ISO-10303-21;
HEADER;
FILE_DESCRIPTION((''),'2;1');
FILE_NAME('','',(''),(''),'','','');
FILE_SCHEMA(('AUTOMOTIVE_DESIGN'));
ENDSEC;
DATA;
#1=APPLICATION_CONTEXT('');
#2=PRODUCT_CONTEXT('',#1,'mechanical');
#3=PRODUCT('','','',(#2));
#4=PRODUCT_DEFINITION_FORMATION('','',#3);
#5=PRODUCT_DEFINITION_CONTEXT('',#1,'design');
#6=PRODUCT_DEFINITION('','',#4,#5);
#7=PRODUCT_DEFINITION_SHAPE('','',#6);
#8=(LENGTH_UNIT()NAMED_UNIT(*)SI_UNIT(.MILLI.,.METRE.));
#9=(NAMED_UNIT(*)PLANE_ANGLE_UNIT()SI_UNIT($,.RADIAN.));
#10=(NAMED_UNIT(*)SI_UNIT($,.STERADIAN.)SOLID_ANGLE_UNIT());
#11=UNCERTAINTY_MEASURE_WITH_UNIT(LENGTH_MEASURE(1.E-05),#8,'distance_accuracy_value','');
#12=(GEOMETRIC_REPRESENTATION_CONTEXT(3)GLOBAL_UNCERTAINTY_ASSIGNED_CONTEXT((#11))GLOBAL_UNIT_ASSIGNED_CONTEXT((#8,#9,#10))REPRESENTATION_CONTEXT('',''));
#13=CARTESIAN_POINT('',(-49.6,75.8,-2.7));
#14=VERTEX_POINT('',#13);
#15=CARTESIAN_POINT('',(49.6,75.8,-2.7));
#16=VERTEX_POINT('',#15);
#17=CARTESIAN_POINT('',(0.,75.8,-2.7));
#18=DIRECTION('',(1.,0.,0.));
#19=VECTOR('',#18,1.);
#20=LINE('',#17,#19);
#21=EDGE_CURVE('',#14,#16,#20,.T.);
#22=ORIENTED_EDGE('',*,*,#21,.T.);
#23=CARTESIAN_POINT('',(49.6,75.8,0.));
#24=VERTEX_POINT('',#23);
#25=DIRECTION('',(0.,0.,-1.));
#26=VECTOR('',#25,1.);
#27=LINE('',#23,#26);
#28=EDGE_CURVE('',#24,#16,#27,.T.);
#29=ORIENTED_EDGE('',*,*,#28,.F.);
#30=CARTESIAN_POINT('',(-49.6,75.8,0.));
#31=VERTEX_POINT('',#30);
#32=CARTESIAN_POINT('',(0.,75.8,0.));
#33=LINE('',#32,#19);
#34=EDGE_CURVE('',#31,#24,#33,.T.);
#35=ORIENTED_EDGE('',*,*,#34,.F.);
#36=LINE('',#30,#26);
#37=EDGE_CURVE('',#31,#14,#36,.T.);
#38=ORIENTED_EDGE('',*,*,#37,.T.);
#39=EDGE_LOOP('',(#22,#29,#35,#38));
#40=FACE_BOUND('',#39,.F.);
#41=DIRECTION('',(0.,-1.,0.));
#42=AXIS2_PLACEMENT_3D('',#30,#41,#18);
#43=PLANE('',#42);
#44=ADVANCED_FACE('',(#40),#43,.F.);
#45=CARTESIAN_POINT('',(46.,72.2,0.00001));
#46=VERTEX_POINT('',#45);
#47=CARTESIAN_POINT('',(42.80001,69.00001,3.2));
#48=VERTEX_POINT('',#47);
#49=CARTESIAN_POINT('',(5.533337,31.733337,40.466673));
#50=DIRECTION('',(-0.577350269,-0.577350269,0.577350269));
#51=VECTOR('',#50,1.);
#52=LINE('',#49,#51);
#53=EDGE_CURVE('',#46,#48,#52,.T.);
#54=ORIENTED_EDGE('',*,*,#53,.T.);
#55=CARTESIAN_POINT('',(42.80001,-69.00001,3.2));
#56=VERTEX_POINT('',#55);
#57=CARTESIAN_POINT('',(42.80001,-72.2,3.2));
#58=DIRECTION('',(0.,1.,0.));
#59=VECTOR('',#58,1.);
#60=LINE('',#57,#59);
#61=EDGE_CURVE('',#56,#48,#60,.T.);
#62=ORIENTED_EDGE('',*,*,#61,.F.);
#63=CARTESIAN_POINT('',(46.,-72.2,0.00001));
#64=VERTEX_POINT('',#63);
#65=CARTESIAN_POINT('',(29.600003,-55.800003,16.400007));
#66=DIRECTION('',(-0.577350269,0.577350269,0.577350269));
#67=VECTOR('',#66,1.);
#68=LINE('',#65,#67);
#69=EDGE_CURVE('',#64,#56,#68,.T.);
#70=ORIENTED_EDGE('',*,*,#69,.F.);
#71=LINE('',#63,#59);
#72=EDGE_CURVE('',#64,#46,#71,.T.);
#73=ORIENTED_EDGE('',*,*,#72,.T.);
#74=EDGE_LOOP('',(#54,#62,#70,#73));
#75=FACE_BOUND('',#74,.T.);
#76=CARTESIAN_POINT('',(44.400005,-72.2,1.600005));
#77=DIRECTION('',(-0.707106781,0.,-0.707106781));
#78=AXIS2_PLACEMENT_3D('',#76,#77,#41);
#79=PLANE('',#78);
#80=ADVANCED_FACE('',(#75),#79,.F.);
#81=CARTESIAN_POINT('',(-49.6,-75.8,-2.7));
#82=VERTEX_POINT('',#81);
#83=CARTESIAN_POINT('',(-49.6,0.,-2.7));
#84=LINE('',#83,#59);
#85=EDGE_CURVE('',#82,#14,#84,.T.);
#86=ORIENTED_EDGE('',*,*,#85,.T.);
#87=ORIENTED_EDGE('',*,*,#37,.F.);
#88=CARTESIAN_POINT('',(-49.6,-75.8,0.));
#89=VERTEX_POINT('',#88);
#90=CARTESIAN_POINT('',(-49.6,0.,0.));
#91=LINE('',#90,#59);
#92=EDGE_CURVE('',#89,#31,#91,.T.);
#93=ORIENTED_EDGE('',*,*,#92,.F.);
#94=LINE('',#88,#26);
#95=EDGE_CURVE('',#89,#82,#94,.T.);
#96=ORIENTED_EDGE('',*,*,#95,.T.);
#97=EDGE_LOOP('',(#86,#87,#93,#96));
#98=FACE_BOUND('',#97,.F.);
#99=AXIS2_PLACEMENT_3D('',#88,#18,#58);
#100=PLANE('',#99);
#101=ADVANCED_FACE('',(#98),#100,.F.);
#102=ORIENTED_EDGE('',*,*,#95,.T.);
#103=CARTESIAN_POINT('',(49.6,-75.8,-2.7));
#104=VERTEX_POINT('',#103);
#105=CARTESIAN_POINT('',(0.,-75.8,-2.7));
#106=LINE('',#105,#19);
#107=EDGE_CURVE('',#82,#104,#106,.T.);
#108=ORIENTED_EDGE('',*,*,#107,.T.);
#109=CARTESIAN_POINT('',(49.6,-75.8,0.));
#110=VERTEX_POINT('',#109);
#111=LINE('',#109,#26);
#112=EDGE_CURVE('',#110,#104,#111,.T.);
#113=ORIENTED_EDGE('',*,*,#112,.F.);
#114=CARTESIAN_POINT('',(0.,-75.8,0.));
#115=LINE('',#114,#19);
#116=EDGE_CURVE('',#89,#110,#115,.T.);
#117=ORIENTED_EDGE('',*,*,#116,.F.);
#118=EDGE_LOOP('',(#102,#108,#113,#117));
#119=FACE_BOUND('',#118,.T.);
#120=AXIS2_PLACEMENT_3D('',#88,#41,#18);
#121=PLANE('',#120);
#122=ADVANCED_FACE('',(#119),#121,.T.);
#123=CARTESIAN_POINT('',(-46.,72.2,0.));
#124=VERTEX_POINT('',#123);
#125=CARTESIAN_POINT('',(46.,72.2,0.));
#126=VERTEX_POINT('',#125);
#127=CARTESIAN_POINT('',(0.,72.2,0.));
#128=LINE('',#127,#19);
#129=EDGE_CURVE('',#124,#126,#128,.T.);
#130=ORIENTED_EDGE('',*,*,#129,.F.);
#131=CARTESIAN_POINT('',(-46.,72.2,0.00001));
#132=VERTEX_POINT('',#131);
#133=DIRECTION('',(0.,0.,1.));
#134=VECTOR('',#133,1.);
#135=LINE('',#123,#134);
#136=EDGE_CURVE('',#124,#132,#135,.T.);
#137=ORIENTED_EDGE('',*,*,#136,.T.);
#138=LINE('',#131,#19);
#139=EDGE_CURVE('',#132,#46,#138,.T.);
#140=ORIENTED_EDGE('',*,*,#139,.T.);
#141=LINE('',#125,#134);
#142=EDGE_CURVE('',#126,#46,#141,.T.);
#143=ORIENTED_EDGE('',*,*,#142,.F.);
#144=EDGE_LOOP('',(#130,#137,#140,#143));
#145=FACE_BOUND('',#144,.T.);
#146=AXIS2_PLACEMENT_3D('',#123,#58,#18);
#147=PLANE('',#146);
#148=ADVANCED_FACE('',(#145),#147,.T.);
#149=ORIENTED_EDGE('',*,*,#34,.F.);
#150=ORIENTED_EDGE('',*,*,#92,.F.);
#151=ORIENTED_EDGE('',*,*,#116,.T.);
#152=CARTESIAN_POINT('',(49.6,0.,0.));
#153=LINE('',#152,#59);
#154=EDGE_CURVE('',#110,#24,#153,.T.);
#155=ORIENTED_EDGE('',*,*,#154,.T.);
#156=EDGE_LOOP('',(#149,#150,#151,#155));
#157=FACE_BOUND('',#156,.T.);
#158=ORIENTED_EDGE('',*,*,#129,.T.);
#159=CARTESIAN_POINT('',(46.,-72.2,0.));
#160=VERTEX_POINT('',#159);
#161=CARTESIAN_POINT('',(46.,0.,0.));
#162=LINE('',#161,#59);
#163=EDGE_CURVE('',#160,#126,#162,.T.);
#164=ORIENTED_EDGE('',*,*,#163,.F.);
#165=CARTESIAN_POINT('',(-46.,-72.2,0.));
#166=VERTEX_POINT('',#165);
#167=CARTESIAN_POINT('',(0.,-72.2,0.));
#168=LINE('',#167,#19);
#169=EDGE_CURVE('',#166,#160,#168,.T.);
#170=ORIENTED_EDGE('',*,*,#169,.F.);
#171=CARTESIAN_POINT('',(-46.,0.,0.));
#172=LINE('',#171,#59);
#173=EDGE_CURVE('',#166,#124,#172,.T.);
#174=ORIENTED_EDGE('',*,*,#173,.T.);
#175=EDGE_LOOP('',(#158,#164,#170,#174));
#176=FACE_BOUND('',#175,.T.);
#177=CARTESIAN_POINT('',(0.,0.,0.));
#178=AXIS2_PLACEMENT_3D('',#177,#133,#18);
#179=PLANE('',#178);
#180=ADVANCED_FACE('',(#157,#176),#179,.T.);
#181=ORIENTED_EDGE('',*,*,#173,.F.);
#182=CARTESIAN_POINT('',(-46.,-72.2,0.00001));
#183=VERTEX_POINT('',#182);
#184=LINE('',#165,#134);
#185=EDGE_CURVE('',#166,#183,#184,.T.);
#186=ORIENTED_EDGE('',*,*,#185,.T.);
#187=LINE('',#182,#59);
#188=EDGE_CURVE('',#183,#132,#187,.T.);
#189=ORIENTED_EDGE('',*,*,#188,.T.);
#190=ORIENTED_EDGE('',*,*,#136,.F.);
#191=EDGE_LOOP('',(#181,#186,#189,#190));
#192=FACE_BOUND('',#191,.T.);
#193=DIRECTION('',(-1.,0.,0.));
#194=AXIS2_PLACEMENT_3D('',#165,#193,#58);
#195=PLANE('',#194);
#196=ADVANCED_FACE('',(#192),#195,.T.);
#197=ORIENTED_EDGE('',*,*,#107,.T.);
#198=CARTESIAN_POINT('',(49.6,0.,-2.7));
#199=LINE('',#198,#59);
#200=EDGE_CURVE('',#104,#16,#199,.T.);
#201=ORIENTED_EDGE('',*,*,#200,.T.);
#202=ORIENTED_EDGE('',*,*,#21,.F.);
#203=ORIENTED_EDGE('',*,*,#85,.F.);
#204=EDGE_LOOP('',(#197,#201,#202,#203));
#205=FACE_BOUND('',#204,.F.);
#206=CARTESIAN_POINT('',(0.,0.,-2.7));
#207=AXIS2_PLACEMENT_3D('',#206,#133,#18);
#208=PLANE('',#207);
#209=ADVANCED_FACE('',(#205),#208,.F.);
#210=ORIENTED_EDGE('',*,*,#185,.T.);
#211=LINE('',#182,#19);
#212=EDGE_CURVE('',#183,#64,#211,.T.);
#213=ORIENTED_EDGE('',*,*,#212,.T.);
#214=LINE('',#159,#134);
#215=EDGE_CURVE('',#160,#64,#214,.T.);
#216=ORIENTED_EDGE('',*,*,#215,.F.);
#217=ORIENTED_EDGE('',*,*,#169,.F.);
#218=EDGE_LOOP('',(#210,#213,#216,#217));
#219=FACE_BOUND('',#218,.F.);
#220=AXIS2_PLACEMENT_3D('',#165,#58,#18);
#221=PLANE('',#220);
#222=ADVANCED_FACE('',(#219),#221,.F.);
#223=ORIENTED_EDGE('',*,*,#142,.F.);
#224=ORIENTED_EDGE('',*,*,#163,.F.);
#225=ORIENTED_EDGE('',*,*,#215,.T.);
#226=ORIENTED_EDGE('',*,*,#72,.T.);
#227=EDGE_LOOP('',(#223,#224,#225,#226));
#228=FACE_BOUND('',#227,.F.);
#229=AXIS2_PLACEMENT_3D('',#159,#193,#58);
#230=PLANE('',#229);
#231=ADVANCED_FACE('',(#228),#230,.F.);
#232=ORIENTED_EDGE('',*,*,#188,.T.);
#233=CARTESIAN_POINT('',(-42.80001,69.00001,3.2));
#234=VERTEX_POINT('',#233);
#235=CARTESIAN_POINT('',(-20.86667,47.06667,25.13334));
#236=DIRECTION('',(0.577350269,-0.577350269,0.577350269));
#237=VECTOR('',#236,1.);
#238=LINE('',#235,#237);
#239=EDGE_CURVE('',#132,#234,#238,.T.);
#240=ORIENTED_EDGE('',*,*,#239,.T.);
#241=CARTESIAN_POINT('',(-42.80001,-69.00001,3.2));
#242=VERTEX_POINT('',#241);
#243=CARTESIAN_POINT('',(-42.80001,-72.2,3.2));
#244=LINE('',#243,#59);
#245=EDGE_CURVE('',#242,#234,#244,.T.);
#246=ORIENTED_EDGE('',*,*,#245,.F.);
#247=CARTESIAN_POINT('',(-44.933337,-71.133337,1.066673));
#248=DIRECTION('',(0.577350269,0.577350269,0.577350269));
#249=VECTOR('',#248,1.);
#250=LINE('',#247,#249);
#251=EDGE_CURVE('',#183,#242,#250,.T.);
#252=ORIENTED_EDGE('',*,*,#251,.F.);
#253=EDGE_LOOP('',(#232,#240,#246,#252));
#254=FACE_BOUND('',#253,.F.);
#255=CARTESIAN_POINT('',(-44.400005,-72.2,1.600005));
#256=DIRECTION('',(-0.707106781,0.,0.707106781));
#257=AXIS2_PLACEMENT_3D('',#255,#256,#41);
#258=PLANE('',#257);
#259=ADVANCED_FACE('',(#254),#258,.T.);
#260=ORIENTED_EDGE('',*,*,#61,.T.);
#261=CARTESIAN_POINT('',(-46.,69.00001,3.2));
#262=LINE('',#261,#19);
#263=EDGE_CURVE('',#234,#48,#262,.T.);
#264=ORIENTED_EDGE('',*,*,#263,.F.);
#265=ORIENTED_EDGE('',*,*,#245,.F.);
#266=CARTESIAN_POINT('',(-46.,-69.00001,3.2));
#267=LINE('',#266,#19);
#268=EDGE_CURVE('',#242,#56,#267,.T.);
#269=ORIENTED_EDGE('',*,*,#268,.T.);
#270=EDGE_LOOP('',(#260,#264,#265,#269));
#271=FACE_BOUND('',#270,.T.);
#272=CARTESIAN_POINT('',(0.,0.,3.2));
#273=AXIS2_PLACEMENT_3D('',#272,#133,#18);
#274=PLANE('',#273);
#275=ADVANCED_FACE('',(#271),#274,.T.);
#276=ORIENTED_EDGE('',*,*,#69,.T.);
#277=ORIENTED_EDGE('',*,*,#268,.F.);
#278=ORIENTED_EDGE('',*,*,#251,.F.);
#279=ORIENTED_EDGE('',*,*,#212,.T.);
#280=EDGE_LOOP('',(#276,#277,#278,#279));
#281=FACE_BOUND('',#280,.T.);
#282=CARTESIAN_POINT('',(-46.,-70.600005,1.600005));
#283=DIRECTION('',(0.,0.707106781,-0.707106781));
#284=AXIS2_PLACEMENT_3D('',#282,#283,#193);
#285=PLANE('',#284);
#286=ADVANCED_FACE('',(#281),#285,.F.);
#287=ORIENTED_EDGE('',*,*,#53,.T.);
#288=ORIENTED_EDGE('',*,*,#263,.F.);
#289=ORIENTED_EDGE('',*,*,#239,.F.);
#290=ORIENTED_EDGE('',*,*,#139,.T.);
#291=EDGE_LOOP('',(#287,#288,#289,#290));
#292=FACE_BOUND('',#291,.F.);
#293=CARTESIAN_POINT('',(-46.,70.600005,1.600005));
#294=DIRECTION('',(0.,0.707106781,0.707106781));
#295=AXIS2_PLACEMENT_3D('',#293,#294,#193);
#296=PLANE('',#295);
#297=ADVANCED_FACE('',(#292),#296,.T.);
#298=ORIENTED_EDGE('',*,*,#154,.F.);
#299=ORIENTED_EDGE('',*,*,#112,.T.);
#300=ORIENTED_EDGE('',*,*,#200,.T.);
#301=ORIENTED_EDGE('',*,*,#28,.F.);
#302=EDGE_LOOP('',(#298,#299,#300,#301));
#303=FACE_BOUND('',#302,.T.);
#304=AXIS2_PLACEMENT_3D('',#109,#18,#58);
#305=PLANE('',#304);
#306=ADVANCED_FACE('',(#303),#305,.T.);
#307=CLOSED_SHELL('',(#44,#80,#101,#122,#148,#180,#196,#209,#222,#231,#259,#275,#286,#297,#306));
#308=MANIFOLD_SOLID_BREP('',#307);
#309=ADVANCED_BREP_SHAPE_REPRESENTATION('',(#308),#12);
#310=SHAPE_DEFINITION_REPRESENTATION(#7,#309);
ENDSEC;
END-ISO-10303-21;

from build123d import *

# Parameters (mm, degrees)
F0_W     = 99.2
F0_H     = 151.6
F0_W_2   = 92
F0_H_2   = 144.4
F0_W_3   = 85.6
F0_H_3   = 138
F1_DEPTH = 2.7
F2_DEPTH = 3.2
F3_SIZE  = 3.19999


# Not quite as in the source:
# - a fillet or chamfer is up to 0.001 mm smaller than in the source, because OpenCascade refuses the exact size


with BuildPart() as f1:
    # F0 (on Top) → F1 (new body)
    with BuildSketch(Plane.XY):
        Rectangle(F0_W, F0_H)
        Rectangle(F0_W_2, F0_H_2, mode=Mode.SUBTRACT)
        Rectangle(F0_W_2, F0_H_2)
        Rectangle(F0_W_3, F0_H_3, mode=Mode.SUBTRACT)
        Rectangle(F0_W_3, F0_H_3)
    extrude(amount=-F1_DEPTH)

    # F0 (on Top) → F2 (join)
    with BuildSketch(Plane.XY):
        Rectangle(F0_W_2, F0_H_2)
        Rectangle(F0_W_3, F0_H_3, mode=Mode.SUBTRACT)
        Rectangle(F0_W_3, F0_H_3)
    extrude(amount=F2_DEPTH)

    # F3 (size 3.2 in the source; OpenCascade refuses exactly that, so slightly less here)
    f3_edges = [f1.edges().sort_by_distance(p)[0] for p in [
        (0, -72.2, 3.2),
        (-46, 0, 3.2),
        (46, 0, 3.2),
        (0, 72.2, 3.2),
    ]]
    chamfer(f3_edges, length=F3_SIZE)


solid = f1.part
